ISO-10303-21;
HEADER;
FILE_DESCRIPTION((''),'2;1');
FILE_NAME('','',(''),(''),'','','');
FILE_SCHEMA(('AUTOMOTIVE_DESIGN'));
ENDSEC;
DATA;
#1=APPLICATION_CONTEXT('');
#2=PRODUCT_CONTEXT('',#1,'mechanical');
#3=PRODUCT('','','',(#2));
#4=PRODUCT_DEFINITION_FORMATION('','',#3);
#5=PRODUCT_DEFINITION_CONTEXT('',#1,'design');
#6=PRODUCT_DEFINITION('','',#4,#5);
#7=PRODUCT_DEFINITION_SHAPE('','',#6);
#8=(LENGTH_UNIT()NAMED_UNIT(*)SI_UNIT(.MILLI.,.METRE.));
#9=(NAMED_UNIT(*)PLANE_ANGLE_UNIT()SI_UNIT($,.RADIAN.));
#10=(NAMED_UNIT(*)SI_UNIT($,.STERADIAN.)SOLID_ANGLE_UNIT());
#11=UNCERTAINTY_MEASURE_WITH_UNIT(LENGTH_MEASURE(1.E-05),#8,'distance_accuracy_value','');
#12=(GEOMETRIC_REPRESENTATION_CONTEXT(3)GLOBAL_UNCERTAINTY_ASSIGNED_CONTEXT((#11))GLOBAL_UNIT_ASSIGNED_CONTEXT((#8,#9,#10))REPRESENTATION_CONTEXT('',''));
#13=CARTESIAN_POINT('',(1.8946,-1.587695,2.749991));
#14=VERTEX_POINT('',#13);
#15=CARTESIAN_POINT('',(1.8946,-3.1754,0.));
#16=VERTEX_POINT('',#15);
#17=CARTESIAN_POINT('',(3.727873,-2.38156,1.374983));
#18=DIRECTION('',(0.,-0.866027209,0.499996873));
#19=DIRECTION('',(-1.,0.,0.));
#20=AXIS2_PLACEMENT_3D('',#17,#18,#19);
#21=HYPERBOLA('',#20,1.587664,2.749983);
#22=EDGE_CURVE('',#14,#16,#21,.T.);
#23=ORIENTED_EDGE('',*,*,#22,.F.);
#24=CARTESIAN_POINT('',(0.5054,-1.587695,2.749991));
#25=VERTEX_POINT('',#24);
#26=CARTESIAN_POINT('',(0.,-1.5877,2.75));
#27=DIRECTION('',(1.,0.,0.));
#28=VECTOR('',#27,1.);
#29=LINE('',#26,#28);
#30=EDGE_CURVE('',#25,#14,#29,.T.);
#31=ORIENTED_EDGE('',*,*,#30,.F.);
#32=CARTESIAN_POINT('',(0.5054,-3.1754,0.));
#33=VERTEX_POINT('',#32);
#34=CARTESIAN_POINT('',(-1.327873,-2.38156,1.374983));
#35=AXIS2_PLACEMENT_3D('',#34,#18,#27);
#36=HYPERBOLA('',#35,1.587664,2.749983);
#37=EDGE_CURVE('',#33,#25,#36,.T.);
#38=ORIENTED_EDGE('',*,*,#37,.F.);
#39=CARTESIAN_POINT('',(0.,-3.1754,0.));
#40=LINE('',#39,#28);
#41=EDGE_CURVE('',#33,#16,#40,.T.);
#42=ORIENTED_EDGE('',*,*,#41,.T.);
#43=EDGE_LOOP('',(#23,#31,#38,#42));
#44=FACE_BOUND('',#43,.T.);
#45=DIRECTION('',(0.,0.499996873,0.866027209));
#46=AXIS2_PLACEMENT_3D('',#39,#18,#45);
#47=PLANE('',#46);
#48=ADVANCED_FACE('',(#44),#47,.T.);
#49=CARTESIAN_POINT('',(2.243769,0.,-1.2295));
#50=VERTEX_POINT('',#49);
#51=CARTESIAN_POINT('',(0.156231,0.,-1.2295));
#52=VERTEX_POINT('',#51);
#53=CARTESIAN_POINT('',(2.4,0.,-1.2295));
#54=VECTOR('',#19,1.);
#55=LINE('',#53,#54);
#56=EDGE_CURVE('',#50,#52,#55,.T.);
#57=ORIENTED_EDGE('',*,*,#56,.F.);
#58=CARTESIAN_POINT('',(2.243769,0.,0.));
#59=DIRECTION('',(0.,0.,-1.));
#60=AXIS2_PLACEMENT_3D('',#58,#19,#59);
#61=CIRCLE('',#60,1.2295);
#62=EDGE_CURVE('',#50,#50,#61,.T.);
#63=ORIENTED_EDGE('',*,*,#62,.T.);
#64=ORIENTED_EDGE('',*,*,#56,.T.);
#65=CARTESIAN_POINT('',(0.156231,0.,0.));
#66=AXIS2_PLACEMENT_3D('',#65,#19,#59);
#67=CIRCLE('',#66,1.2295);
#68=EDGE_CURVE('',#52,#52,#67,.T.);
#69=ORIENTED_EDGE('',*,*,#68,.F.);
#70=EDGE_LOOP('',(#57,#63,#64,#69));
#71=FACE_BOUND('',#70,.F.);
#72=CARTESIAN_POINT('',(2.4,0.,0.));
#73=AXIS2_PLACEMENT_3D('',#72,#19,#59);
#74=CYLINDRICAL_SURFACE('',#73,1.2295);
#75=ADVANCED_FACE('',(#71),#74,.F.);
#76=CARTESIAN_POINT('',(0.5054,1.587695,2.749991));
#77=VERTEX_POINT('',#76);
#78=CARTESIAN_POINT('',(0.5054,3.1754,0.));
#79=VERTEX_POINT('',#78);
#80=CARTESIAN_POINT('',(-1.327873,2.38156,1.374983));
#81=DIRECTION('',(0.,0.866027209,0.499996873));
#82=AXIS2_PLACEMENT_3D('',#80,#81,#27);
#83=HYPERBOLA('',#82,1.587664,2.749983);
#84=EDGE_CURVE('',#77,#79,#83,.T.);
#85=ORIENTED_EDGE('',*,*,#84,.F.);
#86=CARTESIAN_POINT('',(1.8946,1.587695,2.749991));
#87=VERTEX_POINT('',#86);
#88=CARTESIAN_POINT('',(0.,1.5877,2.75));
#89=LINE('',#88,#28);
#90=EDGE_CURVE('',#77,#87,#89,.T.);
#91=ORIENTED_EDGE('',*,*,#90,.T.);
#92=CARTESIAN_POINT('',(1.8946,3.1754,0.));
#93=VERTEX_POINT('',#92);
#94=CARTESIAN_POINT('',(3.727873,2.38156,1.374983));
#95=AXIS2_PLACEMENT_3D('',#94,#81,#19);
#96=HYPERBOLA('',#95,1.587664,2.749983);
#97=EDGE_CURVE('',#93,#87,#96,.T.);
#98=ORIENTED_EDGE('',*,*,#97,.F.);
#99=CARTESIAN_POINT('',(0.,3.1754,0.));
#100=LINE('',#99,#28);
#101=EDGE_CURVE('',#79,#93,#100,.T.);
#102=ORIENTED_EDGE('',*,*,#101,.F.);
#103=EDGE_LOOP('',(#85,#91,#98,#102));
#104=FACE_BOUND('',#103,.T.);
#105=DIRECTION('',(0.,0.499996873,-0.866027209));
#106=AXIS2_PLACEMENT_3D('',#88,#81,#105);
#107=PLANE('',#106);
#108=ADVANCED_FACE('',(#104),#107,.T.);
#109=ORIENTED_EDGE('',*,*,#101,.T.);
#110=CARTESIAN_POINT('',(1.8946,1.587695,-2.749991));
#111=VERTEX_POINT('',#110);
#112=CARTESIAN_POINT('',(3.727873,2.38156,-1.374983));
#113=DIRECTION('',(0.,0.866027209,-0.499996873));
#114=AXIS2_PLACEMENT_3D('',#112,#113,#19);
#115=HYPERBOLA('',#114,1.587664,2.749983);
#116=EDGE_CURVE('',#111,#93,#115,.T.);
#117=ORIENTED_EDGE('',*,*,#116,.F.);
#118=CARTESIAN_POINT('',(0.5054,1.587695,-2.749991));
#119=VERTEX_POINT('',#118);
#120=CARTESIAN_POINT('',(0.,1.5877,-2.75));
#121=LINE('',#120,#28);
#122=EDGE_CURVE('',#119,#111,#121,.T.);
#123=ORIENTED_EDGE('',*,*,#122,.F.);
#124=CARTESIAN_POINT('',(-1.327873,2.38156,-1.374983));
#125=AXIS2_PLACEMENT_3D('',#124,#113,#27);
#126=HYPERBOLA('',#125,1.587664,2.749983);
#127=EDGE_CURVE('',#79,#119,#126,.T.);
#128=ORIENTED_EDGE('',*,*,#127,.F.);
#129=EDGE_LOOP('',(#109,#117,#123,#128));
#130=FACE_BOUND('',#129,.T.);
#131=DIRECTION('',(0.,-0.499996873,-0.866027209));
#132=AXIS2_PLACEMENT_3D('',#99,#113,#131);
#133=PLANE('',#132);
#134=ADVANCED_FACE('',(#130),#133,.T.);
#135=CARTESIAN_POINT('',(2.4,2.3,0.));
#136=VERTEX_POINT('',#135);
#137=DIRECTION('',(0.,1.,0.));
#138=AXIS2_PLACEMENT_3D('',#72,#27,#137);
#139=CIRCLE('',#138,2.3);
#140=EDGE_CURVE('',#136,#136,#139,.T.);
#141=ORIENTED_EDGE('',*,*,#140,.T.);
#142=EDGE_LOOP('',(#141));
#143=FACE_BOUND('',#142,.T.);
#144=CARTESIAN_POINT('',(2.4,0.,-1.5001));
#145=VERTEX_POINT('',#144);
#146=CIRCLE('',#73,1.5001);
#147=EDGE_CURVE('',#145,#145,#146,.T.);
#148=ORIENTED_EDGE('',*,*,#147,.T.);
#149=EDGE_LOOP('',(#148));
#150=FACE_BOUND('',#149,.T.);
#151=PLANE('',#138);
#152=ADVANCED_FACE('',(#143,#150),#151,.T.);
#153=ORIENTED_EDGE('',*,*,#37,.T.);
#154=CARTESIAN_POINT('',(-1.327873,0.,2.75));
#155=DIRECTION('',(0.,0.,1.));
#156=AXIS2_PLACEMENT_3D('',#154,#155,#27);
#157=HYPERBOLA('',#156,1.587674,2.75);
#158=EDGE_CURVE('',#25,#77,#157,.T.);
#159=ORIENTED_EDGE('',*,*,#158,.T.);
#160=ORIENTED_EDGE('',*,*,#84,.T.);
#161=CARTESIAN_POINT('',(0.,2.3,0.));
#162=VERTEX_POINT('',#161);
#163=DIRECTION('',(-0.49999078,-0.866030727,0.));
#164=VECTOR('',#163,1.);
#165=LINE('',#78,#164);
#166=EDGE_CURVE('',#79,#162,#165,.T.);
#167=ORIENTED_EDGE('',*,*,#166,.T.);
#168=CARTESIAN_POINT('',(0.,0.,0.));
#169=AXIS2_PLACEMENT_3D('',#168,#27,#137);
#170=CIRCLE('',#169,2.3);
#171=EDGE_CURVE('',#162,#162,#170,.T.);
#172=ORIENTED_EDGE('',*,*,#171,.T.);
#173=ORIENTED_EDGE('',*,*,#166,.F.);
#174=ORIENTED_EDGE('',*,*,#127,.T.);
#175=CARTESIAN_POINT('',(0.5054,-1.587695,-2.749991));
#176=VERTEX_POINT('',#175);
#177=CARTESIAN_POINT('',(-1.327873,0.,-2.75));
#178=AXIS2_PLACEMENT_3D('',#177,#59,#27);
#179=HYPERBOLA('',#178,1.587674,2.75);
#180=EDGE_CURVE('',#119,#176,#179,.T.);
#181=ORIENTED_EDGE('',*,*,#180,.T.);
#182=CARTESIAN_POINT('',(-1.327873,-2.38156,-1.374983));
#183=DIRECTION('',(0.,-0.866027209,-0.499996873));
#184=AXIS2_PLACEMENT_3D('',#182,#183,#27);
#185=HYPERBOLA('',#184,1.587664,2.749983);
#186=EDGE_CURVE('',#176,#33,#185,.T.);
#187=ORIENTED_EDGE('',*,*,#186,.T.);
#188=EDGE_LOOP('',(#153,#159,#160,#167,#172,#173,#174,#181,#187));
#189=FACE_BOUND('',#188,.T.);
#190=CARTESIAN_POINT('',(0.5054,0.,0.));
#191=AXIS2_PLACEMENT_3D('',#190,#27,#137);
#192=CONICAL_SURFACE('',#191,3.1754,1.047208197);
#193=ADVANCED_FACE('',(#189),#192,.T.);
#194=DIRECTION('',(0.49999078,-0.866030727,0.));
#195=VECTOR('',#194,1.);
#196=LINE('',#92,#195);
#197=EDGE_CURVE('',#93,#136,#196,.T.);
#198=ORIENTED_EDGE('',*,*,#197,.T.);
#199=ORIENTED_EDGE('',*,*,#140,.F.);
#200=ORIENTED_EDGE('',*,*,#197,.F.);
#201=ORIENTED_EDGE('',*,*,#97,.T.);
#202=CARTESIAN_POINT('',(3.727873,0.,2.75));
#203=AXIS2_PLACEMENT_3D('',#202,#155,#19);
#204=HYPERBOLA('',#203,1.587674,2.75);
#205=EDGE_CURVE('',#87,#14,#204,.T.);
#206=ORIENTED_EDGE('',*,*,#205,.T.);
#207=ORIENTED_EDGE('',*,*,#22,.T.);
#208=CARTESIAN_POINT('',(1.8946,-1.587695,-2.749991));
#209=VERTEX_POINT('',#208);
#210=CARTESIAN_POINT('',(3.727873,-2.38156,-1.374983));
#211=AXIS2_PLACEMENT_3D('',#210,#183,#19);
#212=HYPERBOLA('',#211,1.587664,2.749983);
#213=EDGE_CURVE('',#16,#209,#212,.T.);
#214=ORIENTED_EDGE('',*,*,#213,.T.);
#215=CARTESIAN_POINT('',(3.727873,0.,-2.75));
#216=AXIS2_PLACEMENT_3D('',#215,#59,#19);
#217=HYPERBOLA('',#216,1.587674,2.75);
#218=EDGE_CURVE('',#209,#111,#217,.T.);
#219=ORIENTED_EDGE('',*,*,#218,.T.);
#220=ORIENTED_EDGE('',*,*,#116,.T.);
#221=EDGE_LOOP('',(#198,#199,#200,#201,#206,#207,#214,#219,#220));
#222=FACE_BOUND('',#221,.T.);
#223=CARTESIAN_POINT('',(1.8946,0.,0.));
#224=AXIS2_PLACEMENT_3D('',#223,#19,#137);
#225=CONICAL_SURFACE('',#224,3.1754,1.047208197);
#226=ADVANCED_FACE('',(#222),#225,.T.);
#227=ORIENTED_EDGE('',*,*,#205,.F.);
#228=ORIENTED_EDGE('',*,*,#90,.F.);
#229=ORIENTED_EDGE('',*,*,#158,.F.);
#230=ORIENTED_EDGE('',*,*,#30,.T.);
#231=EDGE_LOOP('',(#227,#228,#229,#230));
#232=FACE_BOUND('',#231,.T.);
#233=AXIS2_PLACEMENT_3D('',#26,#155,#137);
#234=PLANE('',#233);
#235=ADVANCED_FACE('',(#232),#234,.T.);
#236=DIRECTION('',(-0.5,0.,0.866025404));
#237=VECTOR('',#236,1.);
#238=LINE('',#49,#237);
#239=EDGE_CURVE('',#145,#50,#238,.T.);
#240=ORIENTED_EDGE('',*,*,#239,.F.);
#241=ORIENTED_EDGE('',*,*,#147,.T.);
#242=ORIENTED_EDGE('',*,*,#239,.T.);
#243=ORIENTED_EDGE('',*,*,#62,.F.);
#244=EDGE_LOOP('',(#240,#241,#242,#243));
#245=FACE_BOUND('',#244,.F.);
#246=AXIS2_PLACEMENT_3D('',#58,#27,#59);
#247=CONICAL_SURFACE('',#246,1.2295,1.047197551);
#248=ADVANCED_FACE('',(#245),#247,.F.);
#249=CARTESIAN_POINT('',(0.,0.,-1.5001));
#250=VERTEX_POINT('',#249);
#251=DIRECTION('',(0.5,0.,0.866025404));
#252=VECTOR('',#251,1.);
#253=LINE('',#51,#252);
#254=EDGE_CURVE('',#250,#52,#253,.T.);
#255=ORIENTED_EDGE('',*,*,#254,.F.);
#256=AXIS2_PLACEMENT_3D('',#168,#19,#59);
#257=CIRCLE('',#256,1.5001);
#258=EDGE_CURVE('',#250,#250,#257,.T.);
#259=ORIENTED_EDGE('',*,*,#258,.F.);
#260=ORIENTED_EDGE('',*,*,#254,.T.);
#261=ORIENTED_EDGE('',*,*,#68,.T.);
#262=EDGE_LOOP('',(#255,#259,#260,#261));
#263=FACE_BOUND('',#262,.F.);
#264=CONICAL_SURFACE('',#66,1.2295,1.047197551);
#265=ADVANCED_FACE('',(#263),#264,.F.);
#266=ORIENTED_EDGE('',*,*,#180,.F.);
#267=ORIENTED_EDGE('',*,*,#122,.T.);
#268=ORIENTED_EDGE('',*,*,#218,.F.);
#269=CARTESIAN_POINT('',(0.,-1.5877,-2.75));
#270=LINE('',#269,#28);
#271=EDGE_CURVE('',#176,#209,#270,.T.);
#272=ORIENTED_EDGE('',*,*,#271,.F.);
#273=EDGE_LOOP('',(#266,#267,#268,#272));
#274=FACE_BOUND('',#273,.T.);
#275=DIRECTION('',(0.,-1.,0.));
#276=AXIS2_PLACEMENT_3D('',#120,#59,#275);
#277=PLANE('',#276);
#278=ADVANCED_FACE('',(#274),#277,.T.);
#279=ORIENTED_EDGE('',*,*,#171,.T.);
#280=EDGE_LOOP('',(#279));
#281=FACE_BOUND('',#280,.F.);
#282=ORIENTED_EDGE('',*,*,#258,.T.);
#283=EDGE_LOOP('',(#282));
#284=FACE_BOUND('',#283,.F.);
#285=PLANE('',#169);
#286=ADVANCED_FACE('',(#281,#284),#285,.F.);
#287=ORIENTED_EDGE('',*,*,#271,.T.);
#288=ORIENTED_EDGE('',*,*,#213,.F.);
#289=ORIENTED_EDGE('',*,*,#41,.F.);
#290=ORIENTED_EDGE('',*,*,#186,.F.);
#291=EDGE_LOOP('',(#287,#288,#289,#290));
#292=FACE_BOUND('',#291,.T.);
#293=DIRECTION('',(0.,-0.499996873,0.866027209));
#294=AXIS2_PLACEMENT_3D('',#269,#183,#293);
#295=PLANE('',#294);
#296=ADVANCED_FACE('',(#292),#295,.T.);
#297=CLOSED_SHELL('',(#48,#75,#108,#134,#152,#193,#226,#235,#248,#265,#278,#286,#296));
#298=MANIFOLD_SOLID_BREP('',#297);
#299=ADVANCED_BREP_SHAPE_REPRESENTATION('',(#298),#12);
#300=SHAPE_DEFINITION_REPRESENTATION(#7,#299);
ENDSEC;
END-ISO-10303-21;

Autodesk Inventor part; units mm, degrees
ref_plane "YZ Plane" through (0, 0, 0) normal (1, 0, 0) x (0, 1, 0)
ref_plane "XZ Plane" through (0, 0, 0) normal (0, 1, 0) x (-1, 0, 0)
sketch "Sketch1" plane through (0, 0, 0) normal (1, 0, 0) x (0, 1, 0)
  line L0 (-3.1754, 0) -> (-1.5877, 2.75)
  line L1 (-1.5877, 2.75) -> (1.5877, 2.75)
  line L2 (1.5877, 2.75) -> (3.1754, 0)
  line L3 (3.1754, 0) -> (1.5877, -2.75)
  line L4 (1.5877, -2.75) -> (-1.5877, -2.75)
  line L5 (-1.5877, -2.75) -> (-3.1754, 0)
  point P0 (0, 0)
  point P1 (0, 0)
  dimension "d0" = 6.3509
extrude "Body" add sketch "Sketch1" along normal blind 2.4
sketch "Sketch2" plane through (0, 0, 0) normal (0, 0, 1) x (1, 0, 0)
  line L0 (0, 1.5877) -> (0, 3.1754) projected
  line L1 (0, 3.1754) -> (2.4, 3.1754) projected
  line L2 (2.4, 1.5877) -> (2.4, 3.1754) projected
  line L3 (-0.48, 0) -> (2.88, 0) projected
  line L4 (0.5054, 3.1754) -> (0, 2.3)
  line L5 (1.8946, 3.1754) -> (2.4, 2.3)
  dimension "d3" = 30
  dimension "d4" = 30
  dimension "d5" = 4.6
  dimension "d6" = 4.6
revolve "Chamfer1" cut sketch "Sketch2" angle 360 about axis through (-10, 0, 0) along (1, 0, 0)
sketch "Sketch3" plane through (2.4, 0, 0) normal (1, 0, 0) x (0, 0, -1)
  arc A0 (-0.625, -1.0825) -> (0.625, -1.0825) centre (0, 0) ccw projected
hole "Thread" at (2.4, 0, 0) direction (-1, 0, 0) diameter 2.459 end through all thread size "M3x0.5" class "6H" standard "ISO Metric profile"
chamfer "Chamfer2" distance 0.2706 angle 30 1 edges at (2.4, 0, 1.2295) measured on face at (2.4, 1.9179, -0.2329)
chamfer "Chamfer3" distance 0.2706 angle 30 1 edges at (0, 0, 1.2295) measured on face at (0, 1.9179, -0.2329)
ref_plane "Work Plane1" through (-6.3375, 0, 0) normal (0, -0.8660254, -0.5) x (1, 0, 0)
equation "\"d0\" = 1.1547 * SW"
equation "\"d1\" = KOH"
equation "\"d3\" = ANG1"
equation "\"d4\" = ANG2"
equation "\"d5\" = SW0"
equation "\"d6\" = SW01"
equation "\"d8\" = -0.5 * GD1 + 0.5 * NND"
equation "\"d40\" = -0.5 * GD1 + 0.5 * NND"
equation "\"d10\" = -0.5 * GD1 + 0.5 * NND"
equation "\"d41\" = -0.5 * GD1 + 0.5 * NND"
equation "\"ANG1\" = 30deg"
equation "\"ANG2\" = 30deg"
equation "\"NND\" = 3"
equation "\"KOH\" = 2.4"
equation "\"SW\" = 5.5"
equation "\"SW0\" = 4.6"
equation "\"SW01\" = SW0"
equation "\"GUL\" = 0.541266 * PTC"
equation "\"THREADDIA\" = 3"
equation "\"TOA\" = 30deg"
equation "\"PTC\" = 0.5"
equation "\"E0\" = 1.155 * SW"
equation "\"GAL\" = 0.541266 * PTC"
equation "\"GD1\" = 2.458734"
properties part number "ISO 4032 - M3(4)" material "Stainless Steel, 440C"
